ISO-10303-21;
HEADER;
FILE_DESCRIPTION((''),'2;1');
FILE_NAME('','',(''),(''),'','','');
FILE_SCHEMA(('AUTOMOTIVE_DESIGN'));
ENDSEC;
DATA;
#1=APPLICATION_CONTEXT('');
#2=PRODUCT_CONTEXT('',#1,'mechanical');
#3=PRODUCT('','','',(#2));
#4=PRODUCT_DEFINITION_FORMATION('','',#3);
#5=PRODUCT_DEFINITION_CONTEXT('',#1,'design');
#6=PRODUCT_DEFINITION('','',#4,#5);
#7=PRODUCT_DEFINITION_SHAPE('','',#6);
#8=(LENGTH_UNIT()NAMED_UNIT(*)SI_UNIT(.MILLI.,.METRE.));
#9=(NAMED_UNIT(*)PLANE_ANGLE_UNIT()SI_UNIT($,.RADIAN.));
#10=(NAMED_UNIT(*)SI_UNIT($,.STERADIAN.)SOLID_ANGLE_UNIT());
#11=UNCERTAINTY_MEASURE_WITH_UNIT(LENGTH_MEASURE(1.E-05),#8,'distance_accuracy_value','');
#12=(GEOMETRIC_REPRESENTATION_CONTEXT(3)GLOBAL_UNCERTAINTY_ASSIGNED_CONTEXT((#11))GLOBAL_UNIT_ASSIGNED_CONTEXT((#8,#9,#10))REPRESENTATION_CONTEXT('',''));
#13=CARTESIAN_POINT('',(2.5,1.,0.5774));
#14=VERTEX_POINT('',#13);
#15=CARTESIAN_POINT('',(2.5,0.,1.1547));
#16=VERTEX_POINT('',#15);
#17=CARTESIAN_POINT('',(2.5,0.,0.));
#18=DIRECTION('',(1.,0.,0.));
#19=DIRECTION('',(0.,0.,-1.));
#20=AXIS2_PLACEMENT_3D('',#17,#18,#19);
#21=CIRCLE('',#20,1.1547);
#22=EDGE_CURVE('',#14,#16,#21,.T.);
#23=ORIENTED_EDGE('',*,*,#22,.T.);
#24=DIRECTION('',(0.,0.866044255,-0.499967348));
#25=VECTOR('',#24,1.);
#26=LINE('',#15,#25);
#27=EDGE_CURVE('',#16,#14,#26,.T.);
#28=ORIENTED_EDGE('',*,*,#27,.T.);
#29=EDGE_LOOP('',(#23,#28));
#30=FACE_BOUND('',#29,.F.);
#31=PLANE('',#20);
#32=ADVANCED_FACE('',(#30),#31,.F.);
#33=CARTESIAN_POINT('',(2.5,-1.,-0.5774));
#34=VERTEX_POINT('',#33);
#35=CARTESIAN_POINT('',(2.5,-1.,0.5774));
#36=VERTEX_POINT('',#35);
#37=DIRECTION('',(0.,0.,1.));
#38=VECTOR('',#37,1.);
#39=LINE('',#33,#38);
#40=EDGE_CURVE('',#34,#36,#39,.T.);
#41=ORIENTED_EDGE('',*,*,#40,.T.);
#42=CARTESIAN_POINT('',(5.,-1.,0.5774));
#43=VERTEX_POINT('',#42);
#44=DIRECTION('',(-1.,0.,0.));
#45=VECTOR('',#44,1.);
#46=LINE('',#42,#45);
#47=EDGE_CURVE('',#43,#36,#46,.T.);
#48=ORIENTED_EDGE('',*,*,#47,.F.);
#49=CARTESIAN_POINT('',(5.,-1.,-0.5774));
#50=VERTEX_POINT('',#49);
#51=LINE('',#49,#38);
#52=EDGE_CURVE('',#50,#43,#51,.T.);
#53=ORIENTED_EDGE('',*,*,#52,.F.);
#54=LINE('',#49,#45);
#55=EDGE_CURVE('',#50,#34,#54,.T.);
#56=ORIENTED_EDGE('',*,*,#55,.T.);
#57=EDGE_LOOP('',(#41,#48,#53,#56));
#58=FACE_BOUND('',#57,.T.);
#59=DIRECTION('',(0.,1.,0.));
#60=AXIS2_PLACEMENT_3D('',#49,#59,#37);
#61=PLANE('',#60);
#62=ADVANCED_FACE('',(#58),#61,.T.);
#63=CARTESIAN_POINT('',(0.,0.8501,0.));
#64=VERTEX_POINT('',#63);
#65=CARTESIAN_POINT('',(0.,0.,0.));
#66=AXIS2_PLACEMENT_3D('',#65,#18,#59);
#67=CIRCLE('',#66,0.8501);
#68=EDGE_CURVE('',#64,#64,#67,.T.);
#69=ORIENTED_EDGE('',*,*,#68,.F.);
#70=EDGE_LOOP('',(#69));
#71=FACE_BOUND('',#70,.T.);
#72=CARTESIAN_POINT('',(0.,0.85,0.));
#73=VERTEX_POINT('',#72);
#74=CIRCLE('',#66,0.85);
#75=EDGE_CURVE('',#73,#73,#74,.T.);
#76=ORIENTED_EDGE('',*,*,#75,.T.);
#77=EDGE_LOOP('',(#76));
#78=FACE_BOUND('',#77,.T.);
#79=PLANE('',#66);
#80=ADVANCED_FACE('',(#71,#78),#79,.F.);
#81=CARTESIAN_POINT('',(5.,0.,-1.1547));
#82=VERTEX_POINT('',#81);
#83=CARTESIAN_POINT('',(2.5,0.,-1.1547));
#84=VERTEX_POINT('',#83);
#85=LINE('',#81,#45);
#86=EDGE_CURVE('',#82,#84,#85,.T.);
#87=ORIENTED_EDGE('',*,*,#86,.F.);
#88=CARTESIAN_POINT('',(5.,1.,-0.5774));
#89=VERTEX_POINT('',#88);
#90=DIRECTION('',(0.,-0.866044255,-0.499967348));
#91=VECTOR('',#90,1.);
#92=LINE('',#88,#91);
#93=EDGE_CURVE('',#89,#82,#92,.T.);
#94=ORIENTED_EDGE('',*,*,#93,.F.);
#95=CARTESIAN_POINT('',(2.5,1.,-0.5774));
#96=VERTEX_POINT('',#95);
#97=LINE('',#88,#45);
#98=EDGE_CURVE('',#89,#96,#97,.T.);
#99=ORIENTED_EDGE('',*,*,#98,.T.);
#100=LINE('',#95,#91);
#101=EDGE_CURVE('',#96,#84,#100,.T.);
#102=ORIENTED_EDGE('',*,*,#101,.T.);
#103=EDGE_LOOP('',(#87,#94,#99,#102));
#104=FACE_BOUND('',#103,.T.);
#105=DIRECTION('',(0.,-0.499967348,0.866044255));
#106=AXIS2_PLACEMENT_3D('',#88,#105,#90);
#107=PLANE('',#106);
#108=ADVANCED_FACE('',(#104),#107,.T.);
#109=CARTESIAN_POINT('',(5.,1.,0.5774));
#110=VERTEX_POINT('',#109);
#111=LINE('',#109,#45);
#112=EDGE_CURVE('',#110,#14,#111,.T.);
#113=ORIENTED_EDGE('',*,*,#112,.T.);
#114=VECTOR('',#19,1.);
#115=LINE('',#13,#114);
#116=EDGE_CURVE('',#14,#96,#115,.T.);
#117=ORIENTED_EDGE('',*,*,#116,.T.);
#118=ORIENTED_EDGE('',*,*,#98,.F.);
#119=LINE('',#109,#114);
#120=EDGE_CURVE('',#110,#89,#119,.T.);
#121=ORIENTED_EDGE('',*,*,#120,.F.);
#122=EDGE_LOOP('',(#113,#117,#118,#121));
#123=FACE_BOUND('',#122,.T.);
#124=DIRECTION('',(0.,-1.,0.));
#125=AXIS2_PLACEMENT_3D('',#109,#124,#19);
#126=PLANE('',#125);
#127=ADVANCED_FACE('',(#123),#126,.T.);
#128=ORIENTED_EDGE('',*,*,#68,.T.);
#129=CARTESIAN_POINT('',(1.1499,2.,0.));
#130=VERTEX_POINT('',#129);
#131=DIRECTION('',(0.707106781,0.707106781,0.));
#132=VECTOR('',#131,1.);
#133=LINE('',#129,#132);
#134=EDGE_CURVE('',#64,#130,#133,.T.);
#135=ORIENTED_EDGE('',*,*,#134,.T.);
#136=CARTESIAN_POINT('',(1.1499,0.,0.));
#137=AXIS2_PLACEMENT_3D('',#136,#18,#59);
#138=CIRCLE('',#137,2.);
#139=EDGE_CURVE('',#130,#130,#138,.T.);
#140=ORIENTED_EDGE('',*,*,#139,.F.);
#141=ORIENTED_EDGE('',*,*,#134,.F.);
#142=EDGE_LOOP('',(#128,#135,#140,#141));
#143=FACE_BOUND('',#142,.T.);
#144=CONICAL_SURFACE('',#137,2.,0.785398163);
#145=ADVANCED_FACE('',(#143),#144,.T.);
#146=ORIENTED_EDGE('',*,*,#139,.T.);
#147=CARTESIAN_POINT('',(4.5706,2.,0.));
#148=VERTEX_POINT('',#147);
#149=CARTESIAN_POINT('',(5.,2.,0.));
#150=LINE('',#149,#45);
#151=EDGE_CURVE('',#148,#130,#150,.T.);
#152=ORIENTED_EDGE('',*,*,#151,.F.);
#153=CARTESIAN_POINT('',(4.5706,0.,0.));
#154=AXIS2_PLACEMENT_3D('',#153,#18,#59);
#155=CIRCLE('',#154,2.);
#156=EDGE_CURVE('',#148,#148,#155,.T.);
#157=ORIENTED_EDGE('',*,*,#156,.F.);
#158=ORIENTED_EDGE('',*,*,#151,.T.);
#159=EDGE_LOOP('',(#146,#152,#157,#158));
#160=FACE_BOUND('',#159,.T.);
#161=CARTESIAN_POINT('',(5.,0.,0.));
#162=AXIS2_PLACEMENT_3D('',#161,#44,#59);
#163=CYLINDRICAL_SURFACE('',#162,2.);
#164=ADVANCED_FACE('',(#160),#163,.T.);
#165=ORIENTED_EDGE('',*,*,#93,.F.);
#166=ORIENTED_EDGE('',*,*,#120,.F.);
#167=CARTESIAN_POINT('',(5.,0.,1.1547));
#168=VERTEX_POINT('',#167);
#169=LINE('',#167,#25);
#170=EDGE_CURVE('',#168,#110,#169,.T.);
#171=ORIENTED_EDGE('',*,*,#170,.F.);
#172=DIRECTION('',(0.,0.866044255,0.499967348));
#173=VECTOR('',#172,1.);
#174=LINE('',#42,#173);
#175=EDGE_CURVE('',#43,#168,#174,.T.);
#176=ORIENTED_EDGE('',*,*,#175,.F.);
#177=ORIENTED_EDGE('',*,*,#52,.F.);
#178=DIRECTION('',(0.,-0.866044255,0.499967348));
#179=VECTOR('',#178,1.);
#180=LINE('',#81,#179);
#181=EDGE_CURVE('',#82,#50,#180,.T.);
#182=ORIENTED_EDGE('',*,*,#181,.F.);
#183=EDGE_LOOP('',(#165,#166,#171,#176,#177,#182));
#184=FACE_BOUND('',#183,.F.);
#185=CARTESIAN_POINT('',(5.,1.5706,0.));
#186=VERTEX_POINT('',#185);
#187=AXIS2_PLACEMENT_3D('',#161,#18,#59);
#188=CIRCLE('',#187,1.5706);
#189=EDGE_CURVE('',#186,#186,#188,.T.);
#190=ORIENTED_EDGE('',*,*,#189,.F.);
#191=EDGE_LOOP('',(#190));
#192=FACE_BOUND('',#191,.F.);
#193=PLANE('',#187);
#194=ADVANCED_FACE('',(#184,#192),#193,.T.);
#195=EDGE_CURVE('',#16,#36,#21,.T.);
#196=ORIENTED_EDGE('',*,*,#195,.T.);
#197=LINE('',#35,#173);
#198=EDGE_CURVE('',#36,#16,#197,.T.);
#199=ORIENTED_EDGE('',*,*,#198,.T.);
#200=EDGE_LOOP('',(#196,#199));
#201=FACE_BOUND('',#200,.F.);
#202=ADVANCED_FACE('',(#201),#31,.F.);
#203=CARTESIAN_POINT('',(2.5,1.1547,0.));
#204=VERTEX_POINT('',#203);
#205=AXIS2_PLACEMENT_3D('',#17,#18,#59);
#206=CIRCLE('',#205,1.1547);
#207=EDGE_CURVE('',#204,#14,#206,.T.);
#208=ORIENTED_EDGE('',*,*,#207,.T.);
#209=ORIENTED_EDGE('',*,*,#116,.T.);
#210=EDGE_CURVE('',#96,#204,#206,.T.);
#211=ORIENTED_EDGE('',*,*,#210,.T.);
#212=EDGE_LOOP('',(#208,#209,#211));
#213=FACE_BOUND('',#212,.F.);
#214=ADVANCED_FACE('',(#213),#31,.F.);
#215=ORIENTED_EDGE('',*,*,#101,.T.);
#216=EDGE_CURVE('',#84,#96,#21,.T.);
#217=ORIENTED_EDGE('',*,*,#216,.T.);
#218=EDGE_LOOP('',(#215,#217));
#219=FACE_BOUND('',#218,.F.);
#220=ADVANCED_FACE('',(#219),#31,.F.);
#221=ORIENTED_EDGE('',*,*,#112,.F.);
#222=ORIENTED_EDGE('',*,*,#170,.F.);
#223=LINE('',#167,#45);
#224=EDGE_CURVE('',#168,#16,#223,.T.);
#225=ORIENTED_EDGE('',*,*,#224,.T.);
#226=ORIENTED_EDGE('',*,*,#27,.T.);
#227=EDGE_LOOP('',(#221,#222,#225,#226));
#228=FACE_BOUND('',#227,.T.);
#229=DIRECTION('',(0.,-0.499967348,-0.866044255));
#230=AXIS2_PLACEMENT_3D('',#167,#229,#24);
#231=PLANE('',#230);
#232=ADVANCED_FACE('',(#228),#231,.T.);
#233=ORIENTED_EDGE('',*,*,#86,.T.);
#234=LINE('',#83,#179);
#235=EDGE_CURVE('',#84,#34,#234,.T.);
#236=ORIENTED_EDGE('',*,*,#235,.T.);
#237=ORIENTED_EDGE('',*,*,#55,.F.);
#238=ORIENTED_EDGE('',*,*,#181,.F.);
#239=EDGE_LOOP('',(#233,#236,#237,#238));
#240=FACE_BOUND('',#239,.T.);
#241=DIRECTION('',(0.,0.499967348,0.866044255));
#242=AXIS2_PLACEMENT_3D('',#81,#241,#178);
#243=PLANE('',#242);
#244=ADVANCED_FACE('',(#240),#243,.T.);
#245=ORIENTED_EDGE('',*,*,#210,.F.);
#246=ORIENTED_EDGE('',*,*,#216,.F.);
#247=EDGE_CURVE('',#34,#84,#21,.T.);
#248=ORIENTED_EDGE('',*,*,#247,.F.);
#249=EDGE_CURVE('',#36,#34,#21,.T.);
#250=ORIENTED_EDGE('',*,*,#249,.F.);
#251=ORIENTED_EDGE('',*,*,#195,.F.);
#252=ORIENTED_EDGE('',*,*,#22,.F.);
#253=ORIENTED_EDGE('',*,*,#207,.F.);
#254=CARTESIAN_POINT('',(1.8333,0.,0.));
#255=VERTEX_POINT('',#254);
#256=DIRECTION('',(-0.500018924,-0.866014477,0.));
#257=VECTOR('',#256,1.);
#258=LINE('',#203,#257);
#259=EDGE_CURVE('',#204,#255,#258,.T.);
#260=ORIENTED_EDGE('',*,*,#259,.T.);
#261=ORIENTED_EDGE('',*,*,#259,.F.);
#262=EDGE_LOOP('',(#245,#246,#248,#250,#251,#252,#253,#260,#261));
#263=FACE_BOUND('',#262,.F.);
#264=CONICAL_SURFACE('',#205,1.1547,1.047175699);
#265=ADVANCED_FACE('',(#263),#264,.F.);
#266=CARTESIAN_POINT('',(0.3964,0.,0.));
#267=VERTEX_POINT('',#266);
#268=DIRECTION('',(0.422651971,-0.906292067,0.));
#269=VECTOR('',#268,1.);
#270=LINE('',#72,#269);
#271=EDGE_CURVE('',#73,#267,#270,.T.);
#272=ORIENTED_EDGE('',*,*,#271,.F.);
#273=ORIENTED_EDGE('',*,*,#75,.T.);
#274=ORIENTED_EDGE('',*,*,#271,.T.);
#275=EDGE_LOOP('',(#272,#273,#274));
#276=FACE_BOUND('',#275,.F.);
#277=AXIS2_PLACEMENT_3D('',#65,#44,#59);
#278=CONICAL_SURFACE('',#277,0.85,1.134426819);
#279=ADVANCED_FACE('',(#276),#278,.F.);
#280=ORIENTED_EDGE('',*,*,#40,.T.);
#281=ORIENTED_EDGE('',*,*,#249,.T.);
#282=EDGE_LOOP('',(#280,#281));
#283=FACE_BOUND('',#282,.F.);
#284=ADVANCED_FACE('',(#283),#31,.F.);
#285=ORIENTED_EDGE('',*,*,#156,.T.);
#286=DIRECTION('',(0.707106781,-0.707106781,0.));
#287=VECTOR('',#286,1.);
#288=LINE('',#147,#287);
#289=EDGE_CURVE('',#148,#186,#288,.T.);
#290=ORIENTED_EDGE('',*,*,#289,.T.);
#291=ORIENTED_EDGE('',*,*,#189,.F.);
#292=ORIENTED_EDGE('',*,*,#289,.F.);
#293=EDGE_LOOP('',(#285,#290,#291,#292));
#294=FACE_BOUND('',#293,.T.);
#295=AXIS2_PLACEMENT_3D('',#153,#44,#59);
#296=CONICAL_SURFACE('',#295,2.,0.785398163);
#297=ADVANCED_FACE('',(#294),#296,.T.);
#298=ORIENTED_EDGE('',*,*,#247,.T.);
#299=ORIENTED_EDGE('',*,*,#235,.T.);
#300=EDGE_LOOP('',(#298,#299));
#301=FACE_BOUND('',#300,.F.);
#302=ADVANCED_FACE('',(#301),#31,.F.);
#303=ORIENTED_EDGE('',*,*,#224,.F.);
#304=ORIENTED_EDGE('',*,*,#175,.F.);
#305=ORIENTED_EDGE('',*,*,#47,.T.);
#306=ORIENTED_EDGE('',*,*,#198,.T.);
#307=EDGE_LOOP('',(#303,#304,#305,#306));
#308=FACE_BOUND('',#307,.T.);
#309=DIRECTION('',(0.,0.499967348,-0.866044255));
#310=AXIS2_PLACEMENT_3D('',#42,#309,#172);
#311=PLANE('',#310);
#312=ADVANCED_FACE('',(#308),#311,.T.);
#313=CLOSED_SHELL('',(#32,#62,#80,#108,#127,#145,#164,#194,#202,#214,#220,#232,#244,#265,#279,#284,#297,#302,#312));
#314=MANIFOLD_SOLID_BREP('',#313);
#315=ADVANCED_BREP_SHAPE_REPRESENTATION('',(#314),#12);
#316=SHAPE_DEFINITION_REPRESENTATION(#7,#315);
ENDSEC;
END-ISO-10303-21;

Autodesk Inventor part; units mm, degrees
ref_plane "YZ Plane" through (0, 0, 0) normal (1, 0, 0) x (0, 1, 0)
ref_plane "XZ Plane" through (0, 0, 0) normal (0, 1, 0) x (-1, 0, 0)
sketch "Sketch1" plane through (0, 0, 0) normal (0, 0, 1) x (1, 0, 0)
  line L0 (0.3964, 0) -> (1.8333, 0)
  line L1 (5, 1.1547) -> (5, 2)
  line L2 (5, 2) -> (0, 2)
  line L3 (5, 1.1547) -> (2.5, 1.1547)
  line L4 (2.5, 1.1547) -> (1.8333, 0)
  line L5 (0, 0.85) -> (0.3964, 0)
  line L6 (0, -0.4) -> (0, 2.4) projected
  line L7 (0, 0.85) -> (0, 2)
  point P0 (0, 0)
  dimension "d0" = 2.5
  dimension "d1" = 60
  dimension "d2" = 4
  dimension "d3" = 2.3094
  dimension "d4" = 5
  dimension "d5" = 65
  dimension "d7" = 1.7
revolve "Body" add sketch "Sketch1" angle 360 about axis through (0.3964, 0, 0) along (1, 0, 0)
sketch "Sketch2" plane through (5, 0, 0) normal (1, 0, 0) x (0, 0, -1)
  circle A0 centre (0, 0) radius 1.1547 projected
  circle A1 centre (0, 0) radius 2 projected
  line L0 (1.1547, 0) -> (0.5774, -1)
  line L1 (0.5774, -1) -> (-0.5774, -1)
  line L2 (-0.5774, -1) -> (-1.1547, 0)
  line L3 (-1.1547, 0) -> (-0.5774, 1)
  line L4 (-0.5774, 1) -> (0.5774, 1)
  line L5 (0.5774, 1) -> (1.1547, 0)
extrude "Slot" add sketch "Sketch2" against normal blind 2.5 contours L5 A0 | A0 L0 | L4 A0 | A0 L1 | L3 A0 | A0 L2
chamfer "Chamfer1" distance 1.15 angle 45 1 edges at (0, -2, 0) measured on face at (0, 1.5973, -0.1595)
thread "Thread" size "M4x0.7" class "6g" standard "ISO Metric profile" length 5
chamfer "Chamfer2" distance 0.4294 angle 45 1 edges at (5, -2, 0) measured on face at (3.7166, 1.9741, -0.3208)
ref_plane "Work Plane1" through (2.5, 0, 0) normal (0, -0.5, -0.8660254) x (1, 0, 0)
equation "\"d0\" = INTI"
equation "\"d2\" = NND"
equation "\"d3\" = 1.1547 * SW"
equation "\"d4\" = NLG"
equation "\"d5\" = 0.5 * ANG"
equation "\"d7\" = SPD"
equation "\"d8\" = INTI"
equation "\"d10\" = -0.5 * SPD + 0.5 * NND"
equation "\"d11\" = FAWI"
equation "\"d33\" = -0.5 * SPD + 0.5 * NND"
equation "\"d14\" = NLG"
equation "\"d12\" = -0.5 * GD1 + 0.5 * NND"
equation "\"d13\" = FAWI"
equation "\"d34\" = -0.5 * GD1 + 0.5 * NND"
equation "\"NND\" = 4"
equation "\"NLG\" = 5"
equation "\"INTI\" = 2.5"
equation "\"FAWI\" = 45deg"
equation "\"SW\" = 2"
equation "\"GD1\" = THREADDIA - 1.2269 * PTC"
equation "\"ANG\" = 130deg"
equation "\"FAWI1\" = 60deg"
equation "\"SPD\" = 1.7"
equation "\"GUL\" = 0.61345 * PTC"
equation "\"TOA\" = 30deg"
equation "\"THREADDIA\" = 4"
equation "\"PTC\" = 0.7"
equation "\"GAL\" = 0.61345 * PTC"
equation "\"E0\" = 1.155 * SW"
properties part number "AS 1421 - M4 x 5 Cup Point" material "Steel, Mild"
